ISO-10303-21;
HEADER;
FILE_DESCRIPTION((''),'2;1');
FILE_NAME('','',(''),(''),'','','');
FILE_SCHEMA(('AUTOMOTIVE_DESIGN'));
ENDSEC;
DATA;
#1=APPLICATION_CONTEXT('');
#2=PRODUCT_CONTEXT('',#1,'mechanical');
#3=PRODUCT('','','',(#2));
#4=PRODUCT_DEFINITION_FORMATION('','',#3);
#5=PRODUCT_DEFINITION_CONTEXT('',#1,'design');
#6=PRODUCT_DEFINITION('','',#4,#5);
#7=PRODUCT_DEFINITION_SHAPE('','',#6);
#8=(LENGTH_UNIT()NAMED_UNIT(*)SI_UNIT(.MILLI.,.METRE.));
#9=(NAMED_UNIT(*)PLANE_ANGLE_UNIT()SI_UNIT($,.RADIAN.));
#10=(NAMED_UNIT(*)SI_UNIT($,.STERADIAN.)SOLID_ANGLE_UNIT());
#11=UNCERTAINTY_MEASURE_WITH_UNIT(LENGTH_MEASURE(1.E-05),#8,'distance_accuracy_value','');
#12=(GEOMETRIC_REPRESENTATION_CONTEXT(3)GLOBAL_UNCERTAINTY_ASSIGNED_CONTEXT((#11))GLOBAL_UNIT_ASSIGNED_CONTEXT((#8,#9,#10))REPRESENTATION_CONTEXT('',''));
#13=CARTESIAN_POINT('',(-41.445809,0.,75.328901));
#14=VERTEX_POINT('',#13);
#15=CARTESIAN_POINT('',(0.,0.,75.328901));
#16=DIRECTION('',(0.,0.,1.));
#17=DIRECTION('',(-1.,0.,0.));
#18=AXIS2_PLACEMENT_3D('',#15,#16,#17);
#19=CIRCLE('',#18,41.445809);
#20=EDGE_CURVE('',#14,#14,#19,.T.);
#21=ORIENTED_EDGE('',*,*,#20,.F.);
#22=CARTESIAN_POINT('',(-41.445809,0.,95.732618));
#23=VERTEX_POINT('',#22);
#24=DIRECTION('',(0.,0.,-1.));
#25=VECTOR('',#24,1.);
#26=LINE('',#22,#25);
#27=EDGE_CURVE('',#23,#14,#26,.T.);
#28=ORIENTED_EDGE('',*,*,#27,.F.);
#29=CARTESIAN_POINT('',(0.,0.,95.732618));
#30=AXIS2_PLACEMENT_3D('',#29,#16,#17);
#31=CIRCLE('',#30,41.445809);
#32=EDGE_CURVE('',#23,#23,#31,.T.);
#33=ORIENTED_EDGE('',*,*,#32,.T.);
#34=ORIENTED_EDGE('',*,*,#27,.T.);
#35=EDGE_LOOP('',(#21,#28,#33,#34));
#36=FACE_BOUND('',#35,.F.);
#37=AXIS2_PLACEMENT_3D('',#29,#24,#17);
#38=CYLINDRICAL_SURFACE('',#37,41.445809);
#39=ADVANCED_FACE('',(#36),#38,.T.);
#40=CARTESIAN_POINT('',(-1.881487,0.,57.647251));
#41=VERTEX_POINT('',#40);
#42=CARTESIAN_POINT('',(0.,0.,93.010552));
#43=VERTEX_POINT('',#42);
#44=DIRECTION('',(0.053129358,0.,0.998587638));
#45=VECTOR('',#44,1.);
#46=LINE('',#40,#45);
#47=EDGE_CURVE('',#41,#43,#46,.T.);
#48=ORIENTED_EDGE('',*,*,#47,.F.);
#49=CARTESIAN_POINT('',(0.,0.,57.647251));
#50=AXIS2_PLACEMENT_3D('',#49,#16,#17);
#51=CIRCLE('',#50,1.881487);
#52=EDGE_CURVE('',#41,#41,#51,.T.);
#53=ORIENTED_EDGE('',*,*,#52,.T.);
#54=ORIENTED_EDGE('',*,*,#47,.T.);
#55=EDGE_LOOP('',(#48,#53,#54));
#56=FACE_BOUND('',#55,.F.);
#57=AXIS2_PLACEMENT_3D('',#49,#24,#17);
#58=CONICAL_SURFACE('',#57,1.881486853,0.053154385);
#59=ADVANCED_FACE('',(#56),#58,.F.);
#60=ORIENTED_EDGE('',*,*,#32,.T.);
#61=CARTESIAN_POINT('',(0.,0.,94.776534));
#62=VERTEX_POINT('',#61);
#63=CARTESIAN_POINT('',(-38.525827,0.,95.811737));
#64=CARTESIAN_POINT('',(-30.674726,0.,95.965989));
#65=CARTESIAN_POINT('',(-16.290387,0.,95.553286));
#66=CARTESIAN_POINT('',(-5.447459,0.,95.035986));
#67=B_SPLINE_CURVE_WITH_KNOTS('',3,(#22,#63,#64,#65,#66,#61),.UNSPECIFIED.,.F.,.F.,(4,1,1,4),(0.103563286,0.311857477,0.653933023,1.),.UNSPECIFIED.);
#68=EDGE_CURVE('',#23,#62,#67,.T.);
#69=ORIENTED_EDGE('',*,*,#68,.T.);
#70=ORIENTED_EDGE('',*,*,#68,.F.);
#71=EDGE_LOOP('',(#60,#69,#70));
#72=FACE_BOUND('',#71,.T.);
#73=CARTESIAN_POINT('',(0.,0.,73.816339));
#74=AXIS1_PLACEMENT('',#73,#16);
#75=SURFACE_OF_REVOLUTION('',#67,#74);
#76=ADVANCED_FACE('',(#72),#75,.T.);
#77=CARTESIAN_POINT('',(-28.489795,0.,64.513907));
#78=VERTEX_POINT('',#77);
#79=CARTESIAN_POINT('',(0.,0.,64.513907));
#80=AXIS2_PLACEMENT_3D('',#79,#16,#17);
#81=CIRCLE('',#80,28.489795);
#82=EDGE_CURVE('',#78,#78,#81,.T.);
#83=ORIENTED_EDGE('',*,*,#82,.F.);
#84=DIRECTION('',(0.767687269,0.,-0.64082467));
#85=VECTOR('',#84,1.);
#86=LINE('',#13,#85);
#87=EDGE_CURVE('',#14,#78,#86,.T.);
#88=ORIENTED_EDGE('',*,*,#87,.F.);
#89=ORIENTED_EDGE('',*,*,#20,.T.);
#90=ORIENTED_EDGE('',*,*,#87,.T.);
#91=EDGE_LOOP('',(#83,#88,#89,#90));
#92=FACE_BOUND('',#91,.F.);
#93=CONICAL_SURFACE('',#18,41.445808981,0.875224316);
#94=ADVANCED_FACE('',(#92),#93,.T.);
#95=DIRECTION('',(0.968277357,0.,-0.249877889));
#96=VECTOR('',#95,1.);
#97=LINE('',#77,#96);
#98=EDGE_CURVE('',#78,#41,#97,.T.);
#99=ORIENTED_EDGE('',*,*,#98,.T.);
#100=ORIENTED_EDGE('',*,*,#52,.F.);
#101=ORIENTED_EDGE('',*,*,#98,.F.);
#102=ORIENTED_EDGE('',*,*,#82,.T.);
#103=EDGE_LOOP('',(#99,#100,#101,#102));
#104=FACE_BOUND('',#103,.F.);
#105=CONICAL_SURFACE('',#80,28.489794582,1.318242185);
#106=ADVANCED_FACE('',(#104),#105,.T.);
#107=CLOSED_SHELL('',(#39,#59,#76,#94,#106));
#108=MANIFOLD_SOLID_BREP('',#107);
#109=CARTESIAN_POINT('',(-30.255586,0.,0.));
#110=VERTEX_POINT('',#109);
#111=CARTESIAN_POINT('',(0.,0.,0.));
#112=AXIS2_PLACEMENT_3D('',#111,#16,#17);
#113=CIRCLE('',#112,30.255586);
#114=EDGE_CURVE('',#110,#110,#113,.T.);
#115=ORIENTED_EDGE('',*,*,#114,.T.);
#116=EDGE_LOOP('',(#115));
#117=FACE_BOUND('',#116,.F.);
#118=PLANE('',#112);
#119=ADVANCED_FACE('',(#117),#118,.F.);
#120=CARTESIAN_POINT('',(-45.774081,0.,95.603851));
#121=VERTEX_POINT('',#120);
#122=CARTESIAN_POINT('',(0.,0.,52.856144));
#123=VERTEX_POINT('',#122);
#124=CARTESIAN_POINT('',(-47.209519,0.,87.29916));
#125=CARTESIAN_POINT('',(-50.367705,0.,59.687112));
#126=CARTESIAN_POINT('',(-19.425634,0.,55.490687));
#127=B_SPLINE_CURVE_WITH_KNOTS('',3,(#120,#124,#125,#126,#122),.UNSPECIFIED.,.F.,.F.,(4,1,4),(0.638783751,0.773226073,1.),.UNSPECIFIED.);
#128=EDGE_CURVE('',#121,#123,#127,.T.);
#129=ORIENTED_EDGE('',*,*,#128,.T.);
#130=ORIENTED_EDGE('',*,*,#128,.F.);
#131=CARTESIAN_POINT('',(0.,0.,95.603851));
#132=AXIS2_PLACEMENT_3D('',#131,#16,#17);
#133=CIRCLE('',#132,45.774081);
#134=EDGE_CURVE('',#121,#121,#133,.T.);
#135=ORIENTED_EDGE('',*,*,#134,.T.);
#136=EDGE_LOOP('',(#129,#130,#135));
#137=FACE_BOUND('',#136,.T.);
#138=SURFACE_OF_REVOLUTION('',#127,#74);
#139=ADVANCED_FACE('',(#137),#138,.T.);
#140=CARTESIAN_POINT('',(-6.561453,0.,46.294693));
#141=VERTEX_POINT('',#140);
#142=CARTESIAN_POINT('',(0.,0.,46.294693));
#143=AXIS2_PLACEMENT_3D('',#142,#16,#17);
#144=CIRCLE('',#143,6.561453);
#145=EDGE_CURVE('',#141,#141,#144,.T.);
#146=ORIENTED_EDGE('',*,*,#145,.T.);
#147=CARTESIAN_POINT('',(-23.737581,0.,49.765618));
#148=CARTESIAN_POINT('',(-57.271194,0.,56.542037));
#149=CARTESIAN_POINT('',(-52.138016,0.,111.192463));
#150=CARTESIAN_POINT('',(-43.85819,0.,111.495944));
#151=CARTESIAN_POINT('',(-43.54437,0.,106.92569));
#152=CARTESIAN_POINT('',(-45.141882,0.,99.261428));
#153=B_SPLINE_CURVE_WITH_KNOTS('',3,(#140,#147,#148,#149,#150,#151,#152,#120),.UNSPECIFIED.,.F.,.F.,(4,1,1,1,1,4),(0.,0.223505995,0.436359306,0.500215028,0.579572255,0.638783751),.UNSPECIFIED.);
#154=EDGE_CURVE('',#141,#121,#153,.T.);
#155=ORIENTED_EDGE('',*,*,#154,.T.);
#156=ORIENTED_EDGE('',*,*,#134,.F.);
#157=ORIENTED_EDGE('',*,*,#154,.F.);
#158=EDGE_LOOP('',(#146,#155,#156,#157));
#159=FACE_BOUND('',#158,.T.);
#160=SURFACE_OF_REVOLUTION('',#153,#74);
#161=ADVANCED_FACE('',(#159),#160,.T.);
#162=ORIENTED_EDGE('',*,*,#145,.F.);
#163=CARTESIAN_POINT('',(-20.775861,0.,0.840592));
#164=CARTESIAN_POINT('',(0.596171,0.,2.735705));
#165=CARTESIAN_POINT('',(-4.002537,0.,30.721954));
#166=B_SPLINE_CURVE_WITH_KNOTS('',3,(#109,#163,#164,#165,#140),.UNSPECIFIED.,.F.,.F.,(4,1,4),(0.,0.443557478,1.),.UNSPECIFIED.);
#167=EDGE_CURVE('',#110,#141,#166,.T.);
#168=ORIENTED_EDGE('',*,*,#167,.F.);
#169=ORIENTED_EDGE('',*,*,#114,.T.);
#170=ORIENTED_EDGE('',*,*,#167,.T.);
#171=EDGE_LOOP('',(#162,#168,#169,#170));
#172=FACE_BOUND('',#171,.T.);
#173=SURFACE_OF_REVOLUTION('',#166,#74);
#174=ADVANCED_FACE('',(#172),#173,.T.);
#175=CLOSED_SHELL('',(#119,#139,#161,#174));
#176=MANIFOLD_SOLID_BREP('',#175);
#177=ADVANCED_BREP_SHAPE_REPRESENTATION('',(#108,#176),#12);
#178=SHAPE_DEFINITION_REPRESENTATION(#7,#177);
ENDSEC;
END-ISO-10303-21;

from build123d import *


with BuildPart() as f1:
    # F0 (on Front) → F1 (revolve)
    with BuildSketch(Plane.XZ):
        with BuildLine():
            Line((-30.2555859089, 0), (0, 0))
            Line((0, 0), (0, 52.856143564))
            add(Edge.make_bspline(
                [(-45.7740813332, 95.6038505465), (-47.2095188305, 87.2991599033), (-50.3677045823, 59.6871122056), (-19.4256343902, 55.4906868783), (0, 52.856143564)],
                knots=[0.6387837514, 0.6387837514, 0.6387837514, 0.6387837514, 0.7732260726, 1, 1, 1, 1], degree=3))
            add(Edge.make_bspline(
                [(-6.5614529885, 46.2946929038), (-23.7375813703, 49.7656176795), (-57.2711940094, 56.5420369251), (-52.1380161092, 111.1924627948), (-43.8581904367, 111.4959441101), (-43.5443703874, 106.9256896786), (-45.1418815845, 99.2614276595), (-45.7740813332, 95.6038505465)],
                knots=[0, 0, 0, 0, 0.2235059953, 0.4363593065, 0.5002150277, 0.5795722554, 0.6387837514, 0.6387837514, 0.6387837514, 0.6387837514], degree=3))
            add(Edge.make_bspline(
                [(-30.2555859089, 0), (-20.7758611956, 0.8405917515), (0.596171045, 2.7357052234), (-4.0025365403, 30.7219540283), (-6.5614529885, 46.2946929038)],
                knots=[0, 0, 0, 0, 0.4435574777, 1, 1, 1, 1], degree=3))
        make_face()
    revolve(axis=Axis((0, 0, 73.816338554), (0, 0, 1)))


with BuildPart() as f1b:
    # F0 (on Front) → F1, piece 2 (revolve)
    with BuildSketch(Plane.XZ):
        with BuildLine():
            Line((-1.8814868527, 57.6472505927), (0, 93.0105522275))
            Line((0, 93.0105522275), (0, 94.7765335441))
            add(Edge.make_bspline(
                [(-41.4458089809, 95.732617781), (-38.525826684, 95.8117367036), (-30.6747257433, 95.9659891353), (-16.2903872548, 95.5532858195), (-5.4474588845, 95.0359859374), (0, 94.7765335441)],
                knots=[0.1035632862, 0.1035632862, 0.1035632862, 0.1035632862, 0.3118574773, 0.6539330232, 1, 1, 1, 1], degree=3))
            Line((-41.4458089809, 95.732617781), (-41.4458089809, 75.3289014101))
            Line((-41.4458089809, 75.3289014101), (-28.4897945821, 64.5139068365))
            Line((-28.4897945821, 64.5139068365), (-1.8814868527, 57.6472505927))
        make_face()
    revolve(axis=Axis((0, 0, 73.816338554), (0, 0, 1)))


solid = Compound([f1.part, f1b.part])
